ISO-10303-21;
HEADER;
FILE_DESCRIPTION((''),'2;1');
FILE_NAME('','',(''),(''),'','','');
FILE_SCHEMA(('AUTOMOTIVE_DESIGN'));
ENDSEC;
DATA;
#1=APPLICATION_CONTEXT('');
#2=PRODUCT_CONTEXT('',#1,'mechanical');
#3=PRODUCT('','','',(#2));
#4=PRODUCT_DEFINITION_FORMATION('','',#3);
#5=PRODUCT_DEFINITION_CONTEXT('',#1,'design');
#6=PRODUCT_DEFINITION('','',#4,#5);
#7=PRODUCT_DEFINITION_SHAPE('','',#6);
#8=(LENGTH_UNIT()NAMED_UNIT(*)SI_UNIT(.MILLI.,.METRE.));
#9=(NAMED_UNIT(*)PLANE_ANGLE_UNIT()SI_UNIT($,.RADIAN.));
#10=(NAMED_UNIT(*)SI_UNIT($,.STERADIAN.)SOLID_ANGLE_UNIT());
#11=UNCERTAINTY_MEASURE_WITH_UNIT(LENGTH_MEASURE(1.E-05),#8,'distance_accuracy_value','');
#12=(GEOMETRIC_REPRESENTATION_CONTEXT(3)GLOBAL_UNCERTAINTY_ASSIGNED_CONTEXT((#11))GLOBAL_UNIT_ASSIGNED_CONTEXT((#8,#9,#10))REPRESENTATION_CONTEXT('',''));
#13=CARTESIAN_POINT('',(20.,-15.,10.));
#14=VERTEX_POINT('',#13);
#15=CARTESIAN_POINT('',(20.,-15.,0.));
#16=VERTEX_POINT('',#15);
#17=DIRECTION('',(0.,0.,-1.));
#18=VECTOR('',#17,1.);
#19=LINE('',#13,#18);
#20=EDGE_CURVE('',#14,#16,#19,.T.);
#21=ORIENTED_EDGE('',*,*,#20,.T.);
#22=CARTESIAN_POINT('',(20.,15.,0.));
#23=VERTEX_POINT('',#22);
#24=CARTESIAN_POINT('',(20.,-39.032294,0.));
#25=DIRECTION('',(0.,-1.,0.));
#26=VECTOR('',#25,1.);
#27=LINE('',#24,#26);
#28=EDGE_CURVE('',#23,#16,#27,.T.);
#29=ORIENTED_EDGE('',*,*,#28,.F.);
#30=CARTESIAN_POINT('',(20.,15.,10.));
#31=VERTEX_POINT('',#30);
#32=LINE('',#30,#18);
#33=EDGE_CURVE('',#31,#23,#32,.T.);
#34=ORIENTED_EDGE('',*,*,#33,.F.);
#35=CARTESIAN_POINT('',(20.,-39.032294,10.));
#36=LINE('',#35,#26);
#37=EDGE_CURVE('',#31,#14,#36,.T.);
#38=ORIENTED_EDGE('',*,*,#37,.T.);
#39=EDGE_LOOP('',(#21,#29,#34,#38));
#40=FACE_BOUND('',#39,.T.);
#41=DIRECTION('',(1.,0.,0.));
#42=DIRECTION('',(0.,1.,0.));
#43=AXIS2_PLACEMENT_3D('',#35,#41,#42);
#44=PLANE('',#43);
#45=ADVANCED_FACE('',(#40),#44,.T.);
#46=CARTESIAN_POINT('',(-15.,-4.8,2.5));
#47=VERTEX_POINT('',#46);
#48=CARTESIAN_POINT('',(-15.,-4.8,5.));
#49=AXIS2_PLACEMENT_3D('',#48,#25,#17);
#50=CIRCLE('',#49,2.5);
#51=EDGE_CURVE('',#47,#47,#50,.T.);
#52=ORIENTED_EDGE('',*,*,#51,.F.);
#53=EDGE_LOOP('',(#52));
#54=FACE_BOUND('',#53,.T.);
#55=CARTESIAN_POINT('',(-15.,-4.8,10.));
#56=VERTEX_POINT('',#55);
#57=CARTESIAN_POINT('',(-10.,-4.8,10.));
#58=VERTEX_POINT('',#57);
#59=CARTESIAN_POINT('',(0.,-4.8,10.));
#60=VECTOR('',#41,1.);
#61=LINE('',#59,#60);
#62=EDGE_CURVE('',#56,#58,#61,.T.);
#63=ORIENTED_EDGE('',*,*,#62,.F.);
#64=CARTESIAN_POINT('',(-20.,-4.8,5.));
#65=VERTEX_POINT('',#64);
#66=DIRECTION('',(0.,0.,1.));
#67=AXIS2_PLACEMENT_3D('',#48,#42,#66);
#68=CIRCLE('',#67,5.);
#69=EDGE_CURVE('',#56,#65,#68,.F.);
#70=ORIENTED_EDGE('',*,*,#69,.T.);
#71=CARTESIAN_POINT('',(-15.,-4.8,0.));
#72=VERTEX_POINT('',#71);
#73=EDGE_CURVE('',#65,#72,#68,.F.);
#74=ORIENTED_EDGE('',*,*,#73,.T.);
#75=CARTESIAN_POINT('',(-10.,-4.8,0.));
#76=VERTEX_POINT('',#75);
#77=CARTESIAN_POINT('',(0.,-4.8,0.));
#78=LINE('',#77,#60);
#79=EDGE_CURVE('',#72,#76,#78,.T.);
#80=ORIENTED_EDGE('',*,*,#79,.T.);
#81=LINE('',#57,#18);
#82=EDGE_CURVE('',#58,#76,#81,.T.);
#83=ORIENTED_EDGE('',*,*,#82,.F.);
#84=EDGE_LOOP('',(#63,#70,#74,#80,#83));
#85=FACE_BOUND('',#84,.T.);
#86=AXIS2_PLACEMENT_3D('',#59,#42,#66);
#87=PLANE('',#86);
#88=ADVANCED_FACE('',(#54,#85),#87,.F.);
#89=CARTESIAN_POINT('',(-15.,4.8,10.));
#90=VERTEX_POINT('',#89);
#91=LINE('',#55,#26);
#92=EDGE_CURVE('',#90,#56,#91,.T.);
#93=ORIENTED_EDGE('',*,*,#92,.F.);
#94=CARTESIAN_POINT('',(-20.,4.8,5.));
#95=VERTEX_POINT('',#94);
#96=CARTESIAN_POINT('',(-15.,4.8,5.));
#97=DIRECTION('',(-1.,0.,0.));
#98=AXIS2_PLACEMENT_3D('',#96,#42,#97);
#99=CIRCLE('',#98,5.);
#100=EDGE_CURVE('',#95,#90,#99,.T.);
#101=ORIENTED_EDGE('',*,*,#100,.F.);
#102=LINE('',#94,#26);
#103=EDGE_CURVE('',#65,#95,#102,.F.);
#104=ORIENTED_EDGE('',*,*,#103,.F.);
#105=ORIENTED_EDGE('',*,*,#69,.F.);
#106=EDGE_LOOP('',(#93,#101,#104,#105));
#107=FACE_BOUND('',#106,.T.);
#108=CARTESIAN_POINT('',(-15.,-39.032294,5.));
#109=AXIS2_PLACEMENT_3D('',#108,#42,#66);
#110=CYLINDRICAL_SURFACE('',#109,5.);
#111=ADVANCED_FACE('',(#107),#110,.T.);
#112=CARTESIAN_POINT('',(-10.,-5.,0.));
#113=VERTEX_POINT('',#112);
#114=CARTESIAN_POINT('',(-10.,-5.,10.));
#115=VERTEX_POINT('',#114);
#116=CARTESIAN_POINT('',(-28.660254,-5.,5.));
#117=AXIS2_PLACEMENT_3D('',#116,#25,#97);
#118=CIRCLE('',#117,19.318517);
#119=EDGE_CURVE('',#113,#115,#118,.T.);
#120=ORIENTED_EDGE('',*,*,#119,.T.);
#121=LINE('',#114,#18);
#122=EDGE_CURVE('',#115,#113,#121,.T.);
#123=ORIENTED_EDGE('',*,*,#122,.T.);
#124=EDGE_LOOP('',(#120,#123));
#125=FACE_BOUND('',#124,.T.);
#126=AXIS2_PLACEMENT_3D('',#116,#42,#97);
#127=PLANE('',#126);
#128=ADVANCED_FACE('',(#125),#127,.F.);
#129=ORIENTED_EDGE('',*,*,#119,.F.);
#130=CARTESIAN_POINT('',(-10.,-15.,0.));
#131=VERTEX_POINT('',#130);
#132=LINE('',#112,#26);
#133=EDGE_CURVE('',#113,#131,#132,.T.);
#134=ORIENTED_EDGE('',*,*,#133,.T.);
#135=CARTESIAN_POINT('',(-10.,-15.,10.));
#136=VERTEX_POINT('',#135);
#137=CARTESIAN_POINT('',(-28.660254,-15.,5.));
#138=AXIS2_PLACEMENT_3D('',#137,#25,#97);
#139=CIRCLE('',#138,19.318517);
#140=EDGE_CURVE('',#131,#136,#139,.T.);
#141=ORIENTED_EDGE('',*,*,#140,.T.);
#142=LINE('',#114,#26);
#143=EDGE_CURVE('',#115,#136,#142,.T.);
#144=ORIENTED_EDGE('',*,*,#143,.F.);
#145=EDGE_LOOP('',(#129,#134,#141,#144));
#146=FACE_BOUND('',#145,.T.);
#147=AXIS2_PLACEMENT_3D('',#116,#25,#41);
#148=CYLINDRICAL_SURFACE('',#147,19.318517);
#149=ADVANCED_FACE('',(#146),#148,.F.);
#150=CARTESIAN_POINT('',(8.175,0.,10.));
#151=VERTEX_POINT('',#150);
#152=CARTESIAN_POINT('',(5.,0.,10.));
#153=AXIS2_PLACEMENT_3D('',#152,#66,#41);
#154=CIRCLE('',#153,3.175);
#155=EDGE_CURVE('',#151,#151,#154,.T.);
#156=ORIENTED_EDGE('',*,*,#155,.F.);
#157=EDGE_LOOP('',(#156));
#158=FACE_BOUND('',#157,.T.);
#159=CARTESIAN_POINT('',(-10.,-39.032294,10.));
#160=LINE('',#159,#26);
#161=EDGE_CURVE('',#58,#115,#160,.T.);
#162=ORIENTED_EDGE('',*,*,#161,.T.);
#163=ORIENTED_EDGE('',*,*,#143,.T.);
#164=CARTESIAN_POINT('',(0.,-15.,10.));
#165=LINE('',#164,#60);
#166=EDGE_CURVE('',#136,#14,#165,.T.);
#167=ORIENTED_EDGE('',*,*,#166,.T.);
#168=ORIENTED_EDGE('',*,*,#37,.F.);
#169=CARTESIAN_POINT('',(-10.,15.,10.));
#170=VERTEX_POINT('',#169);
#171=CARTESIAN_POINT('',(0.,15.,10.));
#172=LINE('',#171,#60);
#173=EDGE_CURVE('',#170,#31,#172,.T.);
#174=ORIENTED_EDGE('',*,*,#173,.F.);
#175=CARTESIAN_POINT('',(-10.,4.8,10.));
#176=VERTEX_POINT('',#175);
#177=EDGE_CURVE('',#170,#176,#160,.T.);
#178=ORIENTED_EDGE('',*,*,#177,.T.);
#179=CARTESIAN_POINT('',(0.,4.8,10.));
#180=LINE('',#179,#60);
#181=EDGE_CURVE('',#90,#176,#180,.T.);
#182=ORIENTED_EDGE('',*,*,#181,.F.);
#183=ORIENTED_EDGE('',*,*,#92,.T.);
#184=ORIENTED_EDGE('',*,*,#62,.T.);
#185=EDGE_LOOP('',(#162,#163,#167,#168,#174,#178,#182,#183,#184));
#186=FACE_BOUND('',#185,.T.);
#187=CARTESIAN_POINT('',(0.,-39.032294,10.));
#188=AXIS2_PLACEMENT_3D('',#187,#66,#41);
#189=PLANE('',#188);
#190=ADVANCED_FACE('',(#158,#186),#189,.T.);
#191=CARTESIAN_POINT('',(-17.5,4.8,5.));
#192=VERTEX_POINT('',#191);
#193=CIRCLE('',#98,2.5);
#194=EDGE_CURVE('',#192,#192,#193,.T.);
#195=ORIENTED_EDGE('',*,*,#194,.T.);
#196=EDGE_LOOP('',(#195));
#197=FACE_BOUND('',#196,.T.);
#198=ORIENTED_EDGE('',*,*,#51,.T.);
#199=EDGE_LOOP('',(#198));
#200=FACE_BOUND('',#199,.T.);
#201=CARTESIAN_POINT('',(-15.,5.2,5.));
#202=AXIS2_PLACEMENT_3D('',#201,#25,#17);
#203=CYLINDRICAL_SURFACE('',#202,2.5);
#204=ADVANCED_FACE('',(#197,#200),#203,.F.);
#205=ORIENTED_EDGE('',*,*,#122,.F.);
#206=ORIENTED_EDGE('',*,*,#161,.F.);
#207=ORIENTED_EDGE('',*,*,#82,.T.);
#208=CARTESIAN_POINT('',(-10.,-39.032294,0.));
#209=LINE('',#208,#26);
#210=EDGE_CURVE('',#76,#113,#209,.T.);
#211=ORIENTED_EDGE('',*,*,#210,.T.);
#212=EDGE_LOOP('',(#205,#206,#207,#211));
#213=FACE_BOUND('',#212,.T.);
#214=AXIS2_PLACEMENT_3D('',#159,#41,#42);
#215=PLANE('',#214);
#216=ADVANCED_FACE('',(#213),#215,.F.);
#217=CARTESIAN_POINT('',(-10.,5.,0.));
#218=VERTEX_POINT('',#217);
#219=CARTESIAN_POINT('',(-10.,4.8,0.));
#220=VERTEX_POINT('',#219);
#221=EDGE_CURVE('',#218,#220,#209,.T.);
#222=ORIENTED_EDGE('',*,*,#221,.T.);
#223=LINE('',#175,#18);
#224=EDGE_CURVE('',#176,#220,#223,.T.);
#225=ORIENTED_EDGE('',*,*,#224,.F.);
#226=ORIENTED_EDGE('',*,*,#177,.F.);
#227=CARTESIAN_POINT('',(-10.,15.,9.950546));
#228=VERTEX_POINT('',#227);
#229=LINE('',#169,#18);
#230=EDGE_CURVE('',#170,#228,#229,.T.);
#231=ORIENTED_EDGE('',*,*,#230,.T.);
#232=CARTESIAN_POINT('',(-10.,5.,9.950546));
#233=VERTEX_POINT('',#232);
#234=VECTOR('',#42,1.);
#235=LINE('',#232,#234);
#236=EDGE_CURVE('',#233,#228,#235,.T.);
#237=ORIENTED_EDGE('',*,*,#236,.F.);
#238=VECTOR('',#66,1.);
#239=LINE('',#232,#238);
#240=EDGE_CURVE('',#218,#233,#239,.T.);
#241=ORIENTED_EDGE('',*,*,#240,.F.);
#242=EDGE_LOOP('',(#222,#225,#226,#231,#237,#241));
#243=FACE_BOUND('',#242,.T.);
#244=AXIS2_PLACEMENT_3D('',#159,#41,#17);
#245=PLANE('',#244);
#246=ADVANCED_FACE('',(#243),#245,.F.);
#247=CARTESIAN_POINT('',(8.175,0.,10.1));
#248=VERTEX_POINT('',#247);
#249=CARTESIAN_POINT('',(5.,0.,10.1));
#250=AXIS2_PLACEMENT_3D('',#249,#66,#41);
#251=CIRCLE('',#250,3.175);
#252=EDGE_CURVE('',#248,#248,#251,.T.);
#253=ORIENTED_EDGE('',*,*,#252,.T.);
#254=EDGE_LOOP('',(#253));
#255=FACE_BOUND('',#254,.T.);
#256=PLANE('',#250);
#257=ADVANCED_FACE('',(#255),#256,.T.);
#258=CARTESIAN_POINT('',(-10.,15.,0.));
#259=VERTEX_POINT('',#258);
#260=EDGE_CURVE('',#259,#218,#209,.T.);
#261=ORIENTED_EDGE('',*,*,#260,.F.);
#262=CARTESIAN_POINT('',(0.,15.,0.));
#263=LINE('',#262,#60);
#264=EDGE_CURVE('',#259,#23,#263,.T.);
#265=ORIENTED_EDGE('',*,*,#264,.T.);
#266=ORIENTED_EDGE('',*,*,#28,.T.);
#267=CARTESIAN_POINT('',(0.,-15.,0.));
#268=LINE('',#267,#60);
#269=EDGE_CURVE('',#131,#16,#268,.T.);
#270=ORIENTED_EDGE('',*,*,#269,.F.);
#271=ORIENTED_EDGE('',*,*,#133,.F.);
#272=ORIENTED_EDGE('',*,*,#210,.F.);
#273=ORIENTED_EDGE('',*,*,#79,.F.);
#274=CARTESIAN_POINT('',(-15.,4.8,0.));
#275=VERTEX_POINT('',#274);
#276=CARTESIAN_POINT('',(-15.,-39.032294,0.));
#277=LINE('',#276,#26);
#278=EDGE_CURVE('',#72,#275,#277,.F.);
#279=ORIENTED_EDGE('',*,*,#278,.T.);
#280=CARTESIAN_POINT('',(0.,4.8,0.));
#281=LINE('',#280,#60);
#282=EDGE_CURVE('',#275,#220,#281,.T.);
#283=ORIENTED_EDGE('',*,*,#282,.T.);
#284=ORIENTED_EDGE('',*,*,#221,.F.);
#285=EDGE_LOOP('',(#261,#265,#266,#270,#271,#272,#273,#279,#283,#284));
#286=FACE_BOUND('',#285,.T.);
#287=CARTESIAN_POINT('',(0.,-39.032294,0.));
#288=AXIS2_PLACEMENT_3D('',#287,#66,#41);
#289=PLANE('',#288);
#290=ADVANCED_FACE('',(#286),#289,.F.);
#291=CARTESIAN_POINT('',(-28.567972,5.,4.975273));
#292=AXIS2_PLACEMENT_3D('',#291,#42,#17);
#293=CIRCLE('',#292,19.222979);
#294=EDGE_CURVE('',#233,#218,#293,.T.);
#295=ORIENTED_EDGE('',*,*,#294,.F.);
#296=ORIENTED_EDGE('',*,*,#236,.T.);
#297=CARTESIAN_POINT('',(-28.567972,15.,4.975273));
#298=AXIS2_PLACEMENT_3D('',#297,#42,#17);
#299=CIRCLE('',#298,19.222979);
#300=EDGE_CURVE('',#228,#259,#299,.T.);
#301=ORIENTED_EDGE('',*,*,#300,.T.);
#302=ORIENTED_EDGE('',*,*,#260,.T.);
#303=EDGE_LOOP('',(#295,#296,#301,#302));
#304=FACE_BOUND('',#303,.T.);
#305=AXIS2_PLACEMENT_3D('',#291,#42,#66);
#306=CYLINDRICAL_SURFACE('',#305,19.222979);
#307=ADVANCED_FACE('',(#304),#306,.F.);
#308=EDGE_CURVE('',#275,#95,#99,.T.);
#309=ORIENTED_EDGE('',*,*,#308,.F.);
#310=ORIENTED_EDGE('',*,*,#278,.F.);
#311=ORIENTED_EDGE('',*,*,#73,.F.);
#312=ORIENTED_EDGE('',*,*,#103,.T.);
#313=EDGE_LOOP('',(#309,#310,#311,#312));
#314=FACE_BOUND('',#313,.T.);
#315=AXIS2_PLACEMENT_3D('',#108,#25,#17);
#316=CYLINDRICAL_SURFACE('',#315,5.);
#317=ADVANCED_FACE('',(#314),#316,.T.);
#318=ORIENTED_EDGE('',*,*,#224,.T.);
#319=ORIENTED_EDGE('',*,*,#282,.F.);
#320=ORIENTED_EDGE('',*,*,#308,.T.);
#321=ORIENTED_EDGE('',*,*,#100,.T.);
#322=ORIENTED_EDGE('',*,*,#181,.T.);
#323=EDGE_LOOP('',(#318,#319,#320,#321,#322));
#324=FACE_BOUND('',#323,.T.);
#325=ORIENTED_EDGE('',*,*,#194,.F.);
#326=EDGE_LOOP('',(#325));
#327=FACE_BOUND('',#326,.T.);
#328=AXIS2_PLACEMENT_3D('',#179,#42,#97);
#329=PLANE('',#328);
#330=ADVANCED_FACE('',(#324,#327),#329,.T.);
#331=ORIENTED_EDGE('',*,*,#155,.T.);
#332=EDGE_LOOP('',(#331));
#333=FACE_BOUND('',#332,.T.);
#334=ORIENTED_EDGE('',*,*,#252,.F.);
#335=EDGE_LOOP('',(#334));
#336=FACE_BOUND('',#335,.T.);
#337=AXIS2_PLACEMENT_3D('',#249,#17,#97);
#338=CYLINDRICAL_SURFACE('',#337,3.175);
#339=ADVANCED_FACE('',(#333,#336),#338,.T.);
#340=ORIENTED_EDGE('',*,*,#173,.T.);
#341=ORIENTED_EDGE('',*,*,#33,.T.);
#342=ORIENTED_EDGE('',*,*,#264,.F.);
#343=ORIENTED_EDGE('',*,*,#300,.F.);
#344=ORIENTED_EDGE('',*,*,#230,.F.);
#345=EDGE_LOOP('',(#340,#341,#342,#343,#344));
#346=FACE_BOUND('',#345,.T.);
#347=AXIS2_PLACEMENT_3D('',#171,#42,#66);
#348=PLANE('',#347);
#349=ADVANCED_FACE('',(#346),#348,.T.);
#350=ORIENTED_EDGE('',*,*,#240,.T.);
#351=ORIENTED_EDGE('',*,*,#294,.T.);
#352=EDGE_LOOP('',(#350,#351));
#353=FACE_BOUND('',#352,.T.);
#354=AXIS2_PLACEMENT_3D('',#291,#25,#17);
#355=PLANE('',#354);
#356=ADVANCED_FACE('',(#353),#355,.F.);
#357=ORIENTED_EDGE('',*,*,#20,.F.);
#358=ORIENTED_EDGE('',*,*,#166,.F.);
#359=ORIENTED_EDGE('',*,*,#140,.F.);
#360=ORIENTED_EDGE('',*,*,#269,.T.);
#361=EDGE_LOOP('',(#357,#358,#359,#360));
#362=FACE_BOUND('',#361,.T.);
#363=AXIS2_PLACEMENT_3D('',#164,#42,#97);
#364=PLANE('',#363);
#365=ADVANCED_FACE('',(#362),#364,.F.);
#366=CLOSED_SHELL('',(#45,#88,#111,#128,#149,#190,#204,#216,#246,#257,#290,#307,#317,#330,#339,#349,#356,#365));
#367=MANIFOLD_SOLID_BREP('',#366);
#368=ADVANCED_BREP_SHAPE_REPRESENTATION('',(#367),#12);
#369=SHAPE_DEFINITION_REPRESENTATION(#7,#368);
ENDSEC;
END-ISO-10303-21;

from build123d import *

# Parameters (mm, degrees)
RESSALTO_EXTRUS_O1_DEPTH = 10
ESBO_O2_R                = 2.5
CORTE_EXTRUS_O1_DEPTH    = 10
FILETE1_R                = 5
CORTE_EXTRUS_O4_DEPTH    = 10
CORTE_EXTRUS_O5_DEPTH    = 10
ESBO_O7_R                = 3.175
RESSALTO_EXTRUS_O2_DEPTH = 0.1


with BuildPart() as part:
    # Esboço1 → Ressalto-extrusão1 (new body)
    with BuildSketch(Plane.XY):
        Polygon((-10, -7.5), (20, 15), (-10, 15), (-10, 4.8), (-20, 4.8), (-20, -4.8), (-10, -4.8), align=None)
        Polygon((20, -15), (20, 15), (-10, -7.5), (-10, -15), align=None)
    extrude(amount=RESSALTO_EXTRUS_O1_DEPTH)

    # Esboço2 → Corte-extrusão1 (cut)
    with BuildSketch(Plane.XZ.offset(4.8)):
        with Locations(Location((-15, 5, 0), (0, 0, 270))):
            Circle(ESBO_O2_R)
    extrude(amount=-CORTE_EXTRUS_O1_DEPTH, mode=Mode.SUBTRACT)

    # Filete1
    filete1_edges = [part.edges().sort_by_distance(p)[0] for p in [
        (-20, 0, 0),
        (-20, 0, 10),
    ]]
    fillet(filete1_edges, radius=FILETE1_R - 0.0001)  # a hair under: the kernel refuses the full size

    # Esboço5 → Corte-extrusão4 (cut)
    with BuildSketch(Plane.XZ.offset(15)):
        with BuildLine():
            Line((-10, 10), (-10, 0))
            ThreePointArc((-10, 0), (-9.341737512, 5), (-10, 10))
        make_face()
    extrude(amount=-CORTE_EXTRUS_O4_DEPTH, mode=Mode.SUBTRACT)

    # Esboço6 → Corte-extrusão5 (cut)
    with BuildSketch(Plane(origin=(0, 15, 0), x_dir=(1, 0, 0), z_dir=(0, 1, 0))):
        with BuildLine():
            Line((-10, -9.950546275), (-10, 0))
            ThreePointArc((-10, 0), (-9.344992865, -4.975273137), (-10, -9.950546275))
        make_face()
    extrude(amount=-CORTE_EXTRUS_O5_DEPTH, mode=Mode.SUBTRACT)

    # Esboço7 → Ressalto-extrusão2 (add)
    with BuildSketch(Plane.XY.offset(10)):
        with Locations((5, 0)):
            Circle(ESBO_O7_R)
    extrude(amount=RESSALTO_EXTRUS_O2_DEPTH)


solid = part.part
